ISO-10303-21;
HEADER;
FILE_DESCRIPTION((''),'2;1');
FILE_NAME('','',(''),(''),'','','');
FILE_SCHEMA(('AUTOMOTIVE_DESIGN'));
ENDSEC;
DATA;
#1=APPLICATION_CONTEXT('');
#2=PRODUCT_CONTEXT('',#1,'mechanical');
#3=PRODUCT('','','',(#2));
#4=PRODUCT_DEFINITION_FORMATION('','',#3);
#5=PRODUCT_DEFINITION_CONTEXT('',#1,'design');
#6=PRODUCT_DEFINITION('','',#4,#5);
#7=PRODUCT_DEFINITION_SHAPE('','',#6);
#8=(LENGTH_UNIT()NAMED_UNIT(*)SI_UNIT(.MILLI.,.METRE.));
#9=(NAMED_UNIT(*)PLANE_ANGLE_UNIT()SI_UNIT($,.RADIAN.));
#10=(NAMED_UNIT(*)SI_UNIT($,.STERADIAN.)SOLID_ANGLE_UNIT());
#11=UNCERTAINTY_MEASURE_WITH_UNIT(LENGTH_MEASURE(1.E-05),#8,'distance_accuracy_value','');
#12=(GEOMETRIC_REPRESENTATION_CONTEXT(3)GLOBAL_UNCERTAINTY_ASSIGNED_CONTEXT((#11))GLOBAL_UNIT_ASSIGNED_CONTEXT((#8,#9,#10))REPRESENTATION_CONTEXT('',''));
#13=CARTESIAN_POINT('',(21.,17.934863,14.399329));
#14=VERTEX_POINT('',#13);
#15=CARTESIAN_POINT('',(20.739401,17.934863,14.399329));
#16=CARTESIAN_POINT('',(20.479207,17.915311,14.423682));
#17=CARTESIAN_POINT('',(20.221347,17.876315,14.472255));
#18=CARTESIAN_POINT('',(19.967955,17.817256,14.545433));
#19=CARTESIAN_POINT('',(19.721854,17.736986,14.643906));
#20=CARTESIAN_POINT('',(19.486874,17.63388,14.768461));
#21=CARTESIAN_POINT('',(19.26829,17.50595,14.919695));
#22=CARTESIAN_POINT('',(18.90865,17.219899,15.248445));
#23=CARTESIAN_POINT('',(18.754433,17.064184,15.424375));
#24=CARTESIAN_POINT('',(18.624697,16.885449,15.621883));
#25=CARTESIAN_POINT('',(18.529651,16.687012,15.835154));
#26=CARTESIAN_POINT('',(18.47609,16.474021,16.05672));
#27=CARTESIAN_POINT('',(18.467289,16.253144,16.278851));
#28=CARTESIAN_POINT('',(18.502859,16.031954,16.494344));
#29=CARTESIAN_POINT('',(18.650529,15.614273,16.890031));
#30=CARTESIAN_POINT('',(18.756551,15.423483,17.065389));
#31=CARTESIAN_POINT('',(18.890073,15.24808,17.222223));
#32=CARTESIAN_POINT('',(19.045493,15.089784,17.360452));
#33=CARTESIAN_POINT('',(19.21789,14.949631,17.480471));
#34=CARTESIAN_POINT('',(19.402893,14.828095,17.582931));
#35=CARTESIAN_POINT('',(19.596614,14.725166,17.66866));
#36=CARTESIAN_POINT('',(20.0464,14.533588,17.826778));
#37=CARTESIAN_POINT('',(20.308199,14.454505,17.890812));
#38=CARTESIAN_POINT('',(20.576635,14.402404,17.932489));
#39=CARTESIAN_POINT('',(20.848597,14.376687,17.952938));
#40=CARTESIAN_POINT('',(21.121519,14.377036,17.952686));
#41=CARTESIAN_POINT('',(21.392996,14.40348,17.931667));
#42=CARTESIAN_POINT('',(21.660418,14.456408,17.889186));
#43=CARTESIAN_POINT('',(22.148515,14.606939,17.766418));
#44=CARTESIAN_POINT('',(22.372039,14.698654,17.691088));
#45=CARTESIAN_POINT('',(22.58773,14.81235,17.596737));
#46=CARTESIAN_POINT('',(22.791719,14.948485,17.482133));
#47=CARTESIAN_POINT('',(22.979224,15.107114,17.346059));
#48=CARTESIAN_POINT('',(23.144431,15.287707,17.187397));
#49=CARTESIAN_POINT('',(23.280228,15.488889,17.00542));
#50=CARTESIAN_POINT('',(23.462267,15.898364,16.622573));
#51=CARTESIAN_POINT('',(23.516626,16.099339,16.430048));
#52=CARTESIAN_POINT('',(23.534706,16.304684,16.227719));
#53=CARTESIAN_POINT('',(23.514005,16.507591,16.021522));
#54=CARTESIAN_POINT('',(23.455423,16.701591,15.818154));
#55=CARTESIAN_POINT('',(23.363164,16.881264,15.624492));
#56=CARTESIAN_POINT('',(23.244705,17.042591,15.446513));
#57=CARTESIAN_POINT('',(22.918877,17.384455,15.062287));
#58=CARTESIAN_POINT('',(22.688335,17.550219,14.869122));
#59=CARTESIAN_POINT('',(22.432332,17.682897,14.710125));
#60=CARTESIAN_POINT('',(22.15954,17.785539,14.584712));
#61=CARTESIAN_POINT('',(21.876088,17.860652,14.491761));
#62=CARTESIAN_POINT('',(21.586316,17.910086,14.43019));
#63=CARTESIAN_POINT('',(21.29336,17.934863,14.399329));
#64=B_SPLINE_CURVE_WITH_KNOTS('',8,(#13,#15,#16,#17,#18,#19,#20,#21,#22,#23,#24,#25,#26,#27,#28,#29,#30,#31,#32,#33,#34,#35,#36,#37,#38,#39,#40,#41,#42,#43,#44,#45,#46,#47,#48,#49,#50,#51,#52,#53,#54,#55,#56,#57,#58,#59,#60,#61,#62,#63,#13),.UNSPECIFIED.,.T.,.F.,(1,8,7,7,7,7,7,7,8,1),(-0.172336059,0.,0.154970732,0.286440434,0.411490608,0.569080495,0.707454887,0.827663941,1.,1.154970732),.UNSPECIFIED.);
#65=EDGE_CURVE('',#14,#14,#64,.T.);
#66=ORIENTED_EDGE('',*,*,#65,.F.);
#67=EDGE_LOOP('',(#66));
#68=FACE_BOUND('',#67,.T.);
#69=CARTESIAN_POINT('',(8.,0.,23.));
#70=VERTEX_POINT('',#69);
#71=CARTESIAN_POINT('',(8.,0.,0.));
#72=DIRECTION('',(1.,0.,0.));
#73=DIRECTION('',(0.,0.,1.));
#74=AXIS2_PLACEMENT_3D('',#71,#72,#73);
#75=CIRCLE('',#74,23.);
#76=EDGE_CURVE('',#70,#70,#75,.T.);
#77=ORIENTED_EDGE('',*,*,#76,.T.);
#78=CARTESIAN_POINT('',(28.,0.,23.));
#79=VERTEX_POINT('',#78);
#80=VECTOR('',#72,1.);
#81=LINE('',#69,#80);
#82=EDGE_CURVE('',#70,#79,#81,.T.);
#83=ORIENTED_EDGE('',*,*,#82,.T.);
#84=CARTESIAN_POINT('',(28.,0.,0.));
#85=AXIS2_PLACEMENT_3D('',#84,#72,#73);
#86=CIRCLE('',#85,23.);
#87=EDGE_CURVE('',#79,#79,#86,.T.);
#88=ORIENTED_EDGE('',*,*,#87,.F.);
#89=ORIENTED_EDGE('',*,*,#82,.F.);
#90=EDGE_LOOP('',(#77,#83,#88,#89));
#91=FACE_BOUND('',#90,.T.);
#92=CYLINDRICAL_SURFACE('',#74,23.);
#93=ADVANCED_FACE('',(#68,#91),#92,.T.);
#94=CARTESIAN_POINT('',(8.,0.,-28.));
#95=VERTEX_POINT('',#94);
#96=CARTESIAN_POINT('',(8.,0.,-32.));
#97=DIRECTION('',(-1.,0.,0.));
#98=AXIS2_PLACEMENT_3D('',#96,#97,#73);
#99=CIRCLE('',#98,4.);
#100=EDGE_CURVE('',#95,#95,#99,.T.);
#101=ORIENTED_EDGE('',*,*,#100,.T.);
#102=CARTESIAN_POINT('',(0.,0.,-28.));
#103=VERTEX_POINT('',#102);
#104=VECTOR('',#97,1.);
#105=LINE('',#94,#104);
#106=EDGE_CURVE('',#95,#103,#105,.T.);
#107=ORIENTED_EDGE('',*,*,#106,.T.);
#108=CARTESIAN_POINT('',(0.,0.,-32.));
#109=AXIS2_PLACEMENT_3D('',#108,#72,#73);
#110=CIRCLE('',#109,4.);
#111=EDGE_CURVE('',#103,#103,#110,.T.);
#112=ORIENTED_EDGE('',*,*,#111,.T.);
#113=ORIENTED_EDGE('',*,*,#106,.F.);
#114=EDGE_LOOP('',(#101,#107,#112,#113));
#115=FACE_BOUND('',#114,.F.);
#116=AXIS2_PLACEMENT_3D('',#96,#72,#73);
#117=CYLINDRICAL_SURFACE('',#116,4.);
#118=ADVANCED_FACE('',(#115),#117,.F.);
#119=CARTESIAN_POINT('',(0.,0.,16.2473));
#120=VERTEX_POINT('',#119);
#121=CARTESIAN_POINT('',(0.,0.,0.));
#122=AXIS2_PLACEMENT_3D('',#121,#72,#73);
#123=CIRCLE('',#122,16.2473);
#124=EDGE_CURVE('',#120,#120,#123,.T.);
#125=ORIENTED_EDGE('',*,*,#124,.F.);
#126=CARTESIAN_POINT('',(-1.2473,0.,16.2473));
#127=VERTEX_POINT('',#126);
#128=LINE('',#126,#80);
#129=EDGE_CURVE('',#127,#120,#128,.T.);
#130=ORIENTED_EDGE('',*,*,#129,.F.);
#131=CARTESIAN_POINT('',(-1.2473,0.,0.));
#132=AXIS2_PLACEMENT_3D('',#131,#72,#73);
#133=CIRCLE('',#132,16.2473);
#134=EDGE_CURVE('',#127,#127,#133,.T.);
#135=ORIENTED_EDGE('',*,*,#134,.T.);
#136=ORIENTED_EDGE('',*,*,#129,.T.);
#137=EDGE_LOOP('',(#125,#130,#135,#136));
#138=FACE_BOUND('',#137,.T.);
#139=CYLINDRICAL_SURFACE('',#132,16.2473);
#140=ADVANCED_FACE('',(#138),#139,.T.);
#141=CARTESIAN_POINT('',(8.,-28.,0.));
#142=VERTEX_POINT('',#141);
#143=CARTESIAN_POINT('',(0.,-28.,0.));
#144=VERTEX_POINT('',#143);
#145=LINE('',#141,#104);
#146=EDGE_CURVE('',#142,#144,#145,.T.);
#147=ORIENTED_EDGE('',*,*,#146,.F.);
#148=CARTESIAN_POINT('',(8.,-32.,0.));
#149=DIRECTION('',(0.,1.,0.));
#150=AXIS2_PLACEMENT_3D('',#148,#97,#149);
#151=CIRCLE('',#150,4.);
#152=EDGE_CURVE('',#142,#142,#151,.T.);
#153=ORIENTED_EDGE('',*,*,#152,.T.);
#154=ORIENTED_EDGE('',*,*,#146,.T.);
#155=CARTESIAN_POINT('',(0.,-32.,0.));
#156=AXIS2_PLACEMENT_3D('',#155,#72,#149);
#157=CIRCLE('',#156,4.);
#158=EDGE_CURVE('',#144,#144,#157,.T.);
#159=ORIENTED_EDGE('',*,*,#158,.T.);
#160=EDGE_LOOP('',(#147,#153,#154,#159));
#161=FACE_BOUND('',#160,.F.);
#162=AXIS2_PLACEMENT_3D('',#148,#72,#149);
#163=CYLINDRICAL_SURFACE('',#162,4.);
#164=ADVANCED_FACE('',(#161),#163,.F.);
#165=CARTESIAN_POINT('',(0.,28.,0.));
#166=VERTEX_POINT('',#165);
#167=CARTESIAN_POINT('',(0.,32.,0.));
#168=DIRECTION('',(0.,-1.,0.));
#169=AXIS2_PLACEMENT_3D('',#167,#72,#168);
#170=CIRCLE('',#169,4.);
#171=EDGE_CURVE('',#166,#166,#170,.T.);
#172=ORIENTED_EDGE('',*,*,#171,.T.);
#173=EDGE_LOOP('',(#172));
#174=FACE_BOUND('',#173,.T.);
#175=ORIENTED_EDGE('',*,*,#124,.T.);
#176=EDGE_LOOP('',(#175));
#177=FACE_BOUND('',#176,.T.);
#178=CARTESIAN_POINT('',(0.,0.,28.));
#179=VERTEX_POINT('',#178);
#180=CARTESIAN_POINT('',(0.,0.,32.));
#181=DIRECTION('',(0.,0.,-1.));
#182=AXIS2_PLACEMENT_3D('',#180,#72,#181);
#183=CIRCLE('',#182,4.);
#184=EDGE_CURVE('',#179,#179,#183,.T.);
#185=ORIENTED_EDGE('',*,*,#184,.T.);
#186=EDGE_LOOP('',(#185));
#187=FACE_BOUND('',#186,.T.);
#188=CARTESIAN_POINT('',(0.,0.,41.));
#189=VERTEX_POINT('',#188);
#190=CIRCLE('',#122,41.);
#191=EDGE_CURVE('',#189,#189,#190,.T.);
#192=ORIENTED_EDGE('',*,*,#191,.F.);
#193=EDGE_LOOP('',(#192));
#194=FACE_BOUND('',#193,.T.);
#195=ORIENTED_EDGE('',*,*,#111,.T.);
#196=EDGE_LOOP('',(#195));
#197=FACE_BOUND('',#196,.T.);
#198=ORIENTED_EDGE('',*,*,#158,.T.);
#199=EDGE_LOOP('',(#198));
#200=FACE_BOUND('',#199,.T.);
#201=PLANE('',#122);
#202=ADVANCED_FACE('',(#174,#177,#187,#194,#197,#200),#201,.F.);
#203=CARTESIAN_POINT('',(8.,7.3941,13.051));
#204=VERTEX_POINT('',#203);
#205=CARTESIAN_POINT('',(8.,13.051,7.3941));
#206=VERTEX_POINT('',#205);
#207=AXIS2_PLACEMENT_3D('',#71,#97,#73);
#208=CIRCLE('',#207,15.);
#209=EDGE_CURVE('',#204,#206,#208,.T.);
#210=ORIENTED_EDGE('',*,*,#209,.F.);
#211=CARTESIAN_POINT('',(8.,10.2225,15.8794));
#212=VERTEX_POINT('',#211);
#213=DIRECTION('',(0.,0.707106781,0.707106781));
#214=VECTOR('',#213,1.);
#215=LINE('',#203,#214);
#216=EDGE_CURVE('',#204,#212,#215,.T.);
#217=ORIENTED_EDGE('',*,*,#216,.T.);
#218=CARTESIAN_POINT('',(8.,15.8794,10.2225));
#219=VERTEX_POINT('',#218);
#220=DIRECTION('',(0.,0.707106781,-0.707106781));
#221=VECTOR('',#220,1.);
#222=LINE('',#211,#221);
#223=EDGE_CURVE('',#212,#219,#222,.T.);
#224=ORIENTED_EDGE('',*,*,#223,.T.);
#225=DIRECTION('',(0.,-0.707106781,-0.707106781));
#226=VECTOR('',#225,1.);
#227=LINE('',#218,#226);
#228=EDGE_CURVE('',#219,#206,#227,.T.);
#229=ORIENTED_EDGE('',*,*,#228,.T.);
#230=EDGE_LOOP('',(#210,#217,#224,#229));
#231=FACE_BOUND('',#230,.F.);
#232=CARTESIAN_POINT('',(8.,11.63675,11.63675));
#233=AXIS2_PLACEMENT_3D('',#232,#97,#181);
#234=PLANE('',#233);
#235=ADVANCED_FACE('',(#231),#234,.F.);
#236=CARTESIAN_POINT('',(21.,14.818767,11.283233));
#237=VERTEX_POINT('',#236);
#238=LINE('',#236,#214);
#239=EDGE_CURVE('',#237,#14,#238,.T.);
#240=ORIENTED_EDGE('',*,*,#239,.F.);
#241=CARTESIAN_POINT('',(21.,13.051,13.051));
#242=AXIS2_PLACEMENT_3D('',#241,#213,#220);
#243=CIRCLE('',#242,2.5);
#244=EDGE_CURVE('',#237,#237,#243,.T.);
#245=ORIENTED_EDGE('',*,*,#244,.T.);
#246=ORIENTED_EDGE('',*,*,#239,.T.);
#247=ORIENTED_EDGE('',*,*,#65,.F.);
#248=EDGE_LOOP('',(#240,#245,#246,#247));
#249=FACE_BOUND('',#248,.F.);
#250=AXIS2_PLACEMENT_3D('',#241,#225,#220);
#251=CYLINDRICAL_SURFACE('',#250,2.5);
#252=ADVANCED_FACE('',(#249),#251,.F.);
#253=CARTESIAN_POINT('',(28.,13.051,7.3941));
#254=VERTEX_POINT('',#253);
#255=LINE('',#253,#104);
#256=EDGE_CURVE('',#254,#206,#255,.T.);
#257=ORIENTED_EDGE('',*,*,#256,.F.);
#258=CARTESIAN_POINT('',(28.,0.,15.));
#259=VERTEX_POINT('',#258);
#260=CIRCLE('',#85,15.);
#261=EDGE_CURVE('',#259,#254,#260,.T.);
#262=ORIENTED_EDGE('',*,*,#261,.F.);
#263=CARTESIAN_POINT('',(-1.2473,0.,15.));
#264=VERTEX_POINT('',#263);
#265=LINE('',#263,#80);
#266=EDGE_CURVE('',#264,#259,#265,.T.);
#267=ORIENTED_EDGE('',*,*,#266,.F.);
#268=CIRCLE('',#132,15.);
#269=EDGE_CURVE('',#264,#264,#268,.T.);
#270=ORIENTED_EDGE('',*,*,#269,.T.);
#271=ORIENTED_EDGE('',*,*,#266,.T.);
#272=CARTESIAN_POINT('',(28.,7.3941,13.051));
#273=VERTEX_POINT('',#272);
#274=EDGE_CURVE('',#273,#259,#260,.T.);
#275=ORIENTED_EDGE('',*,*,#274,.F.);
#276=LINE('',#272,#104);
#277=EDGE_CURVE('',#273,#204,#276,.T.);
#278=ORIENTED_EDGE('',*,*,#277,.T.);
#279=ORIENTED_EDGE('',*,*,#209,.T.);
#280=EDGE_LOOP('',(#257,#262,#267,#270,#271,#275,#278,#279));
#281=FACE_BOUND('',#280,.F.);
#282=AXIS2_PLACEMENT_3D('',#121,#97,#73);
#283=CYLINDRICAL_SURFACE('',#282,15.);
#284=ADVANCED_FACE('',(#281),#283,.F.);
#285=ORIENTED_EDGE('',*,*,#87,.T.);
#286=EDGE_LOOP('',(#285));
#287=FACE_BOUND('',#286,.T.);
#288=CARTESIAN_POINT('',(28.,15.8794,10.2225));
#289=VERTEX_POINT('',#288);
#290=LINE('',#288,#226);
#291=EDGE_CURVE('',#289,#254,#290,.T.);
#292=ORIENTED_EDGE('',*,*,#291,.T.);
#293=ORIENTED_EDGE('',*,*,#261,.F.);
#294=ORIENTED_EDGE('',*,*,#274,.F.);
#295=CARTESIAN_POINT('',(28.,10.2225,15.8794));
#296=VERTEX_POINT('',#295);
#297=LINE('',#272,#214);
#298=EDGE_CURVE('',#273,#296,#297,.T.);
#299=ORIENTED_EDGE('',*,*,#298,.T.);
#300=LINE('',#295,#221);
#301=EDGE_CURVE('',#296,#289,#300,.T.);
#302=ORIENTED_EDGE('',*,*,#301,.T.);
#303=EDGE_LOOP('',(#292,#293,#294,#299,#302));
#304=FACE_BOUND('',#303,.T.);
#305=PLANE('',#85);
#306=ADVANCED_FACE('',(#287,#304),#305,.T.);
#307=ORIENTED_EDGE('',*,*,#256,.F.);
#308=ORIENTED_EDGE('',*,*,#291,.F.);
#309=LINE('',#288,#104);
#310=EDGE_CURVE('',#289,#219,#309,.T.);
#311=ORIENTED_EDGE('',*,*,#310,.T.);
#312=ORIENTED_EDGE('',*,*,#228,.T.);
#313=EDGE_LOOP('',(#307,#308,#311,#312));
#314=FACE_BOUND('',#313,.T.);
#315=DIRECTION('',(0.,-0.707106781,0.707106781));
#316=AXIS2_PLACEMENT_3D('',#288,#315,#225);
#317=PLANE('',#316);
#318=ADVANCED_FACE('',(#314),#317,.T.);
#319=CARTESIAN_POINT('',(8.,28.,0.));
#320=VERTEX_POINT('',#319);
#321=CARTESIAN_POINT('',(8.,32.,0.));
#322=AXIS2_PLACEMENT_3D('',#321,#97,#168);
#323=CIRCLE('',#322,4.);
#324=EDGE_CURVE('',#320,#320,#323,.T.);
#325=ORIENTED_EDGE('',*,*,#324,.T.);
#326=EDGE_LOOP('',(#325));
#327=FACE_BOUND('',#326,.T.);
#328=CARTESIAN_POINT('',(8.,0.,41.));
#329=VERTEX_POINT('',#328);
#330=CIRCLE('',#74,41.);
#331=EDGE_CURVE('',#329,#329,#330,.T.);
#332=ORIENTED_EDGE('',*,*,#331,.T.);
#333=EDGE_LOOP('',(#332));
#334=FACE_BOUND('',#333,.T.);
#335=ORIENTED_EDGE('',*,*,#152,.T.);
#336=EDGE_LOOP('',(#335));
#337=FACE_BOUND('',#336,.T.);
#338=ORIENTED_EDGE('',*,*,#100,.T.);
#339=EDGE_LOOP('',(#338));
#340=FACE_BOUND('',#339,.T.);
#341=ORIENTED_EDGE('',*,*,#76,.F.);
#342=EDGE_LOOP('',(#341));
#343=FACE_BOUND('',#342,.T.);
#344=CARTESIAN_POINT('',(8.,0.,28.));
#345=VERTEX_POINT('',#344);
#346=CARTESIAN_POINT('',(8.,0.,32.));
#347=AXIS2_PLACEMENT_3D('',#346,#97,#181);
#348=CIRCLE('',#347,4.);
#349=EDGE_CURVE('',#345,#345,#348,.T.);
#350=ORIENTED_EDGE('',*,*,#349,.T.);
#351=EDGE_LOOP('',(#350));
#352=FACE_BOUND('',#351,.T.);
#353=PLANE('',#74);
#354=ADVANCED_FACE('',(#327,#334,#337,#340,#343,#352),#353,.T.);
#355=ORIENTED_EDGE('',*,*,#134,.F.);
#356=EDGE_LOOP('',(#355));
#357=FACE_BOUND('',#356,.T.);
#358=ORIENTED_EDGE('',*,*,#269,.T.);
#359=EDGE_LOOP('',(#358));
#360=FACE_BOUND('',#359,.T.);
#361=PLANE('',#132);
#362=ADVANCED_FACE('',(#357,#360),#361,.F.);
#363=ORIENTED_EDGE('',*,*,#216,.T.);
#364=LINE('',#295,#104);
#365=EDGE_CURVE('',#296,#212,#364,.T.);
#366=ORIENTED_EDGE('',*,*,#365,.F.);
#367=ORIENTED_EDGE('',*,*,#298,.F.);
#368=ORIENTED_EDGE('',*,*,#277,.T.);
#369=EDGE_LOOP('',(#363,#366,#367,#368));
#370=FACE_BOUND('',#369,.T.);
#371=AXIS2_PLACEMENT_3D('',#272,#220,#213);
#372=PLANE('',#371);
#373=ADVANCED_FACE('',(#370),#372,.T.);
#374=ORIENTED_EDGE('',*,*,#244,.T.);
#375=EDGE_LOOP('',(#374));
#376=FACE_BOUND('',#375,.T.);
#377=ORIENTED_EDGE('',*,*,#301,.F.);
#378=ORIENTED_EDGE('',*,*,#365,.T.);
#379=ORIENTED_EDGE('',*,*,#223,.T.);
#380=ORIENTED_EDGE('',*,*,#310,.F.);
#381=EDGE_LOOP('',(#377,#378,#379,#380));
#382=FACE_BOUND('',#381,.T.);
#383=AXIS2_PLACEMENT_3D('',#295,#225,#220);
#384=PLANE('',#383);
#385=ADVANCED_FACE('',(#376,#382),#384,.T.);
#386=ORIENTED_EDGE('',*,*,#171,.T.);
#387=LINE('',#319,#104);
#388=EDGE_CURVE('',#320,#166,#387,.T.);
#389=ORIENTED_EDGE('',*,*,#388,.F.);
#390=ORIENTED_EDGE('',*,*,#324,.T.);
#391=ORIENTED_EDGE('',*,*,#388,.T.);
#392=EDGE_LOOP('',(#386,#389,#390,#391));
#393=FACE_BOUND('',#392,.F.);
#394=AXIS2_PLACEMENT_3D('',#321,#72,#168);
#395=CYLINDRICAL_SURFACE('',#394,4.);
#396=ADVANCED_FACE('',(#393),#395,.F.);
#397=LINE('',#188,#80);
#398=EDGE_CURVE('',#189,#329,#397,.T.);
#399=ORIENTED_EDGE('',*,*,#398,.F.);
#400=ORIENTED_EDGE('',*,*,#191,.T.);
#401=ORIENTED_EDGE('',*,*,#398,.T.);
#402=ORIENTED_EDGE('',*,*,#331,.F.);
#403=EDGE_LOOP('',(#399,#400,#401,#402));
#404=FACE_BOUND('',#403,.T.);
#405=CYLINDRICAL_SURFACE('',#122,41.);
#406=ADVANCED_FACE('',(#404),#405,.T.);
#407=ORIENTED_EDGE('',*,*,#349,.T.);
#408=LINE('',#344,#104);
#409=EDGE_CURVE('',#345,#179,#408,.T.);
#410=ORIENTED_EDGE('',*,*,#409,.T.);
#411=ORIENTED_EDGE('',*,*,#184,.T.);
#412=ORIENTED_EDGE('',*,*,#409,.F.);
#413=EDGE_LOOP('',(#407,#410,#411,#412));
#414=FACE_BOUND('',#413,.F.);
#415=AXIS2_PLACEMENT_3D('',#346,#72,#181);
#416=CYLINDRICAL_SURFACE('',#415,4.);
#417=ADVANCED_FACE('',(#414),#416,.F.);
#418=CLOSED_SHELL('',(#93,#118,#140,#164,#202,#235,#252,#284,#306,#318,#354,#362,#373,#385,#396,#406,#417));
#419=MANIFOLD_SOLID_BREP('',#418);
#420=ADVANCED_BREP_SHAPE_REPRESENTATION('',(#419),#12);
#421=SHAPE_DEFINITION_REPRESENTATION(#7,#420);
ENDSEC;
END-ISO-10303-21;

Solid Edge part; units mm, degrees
sketch "Sketch1" plane through (0, 0, 0) normal (0, -1, 0) x (1, 0, 0)
  line L0 (0, 15) -> (0, 41)
  line L1 (0, 41) -> (8, 41)
  line L2 (8, 41) -> (8, 23)
  line L3 (8, 23) -> (28, 23)
  line L4 (28, 23) -> (28, 15)
  line L5 (28, 15) -> (0, 15)
  dimension "D1" = 15
  dimension "D2" = 26
  dimension "D3" = 8
  dimension "D4" = 8
  dimension "D5" = 20
revolve "RevolvedProtrusion1" add sketch "Sketch1" angle 360 about axis through (0, 0, 0) along (1, 0, 0)
hole "Hole1" at (8, 0, 32) direction (-1, 0, 0) diameter 8 end up to next
pattern_circular "Pattern2" count 4 over 360 about axis through (8, 0, 0) along (-1, 0, 0) of "Hole1"
sketch "Sketch2" plane through (28, 0, 0) normal (1, 0, 0) x (0, 1, 0)
  line L0 (7.3941, 13.051) -> (10.2225, 15.8794)
  line L1 (10.2225, 15.8794) -> (15.8794, 10.2225)
  line L2 (15.8794, 10.2225) -> (13.051, 7.3941)
  line L3 (13.051, 7.3941) -> (7.3941, 13.051)
  dimension "D1" = 8
  dimension "D2" = 4
extrude "Cutout1" cut sketch "Sketch2" against normal up to vertex (20 mm away)
sketch "Sketch3" plane through (0, 0, 0) normal (0, 1, 0) x (-1, 0, 0)
  line L0 (0, 15) -> (1.2473, 15)
  line L1 (1.2473, 15) -> (1.2473, 16.2473)
  line L2 (1.2473, 16.2473) -> (0, 16.2473)
  line L3 (0, 16.2473) -> (0, 15)
  dimension "D1" = 1.2473
revolve "RevolvedProtrusion2" add sketch "Sketch3" angle 360 about axis through (0, 0, 0) along (1, 0, 0)
hole "Hole2" at (21, 13.051, 13.051) direction (0, 0.7071068, 0.7071068) diameter 5 end up to next
properties material "Steel"
